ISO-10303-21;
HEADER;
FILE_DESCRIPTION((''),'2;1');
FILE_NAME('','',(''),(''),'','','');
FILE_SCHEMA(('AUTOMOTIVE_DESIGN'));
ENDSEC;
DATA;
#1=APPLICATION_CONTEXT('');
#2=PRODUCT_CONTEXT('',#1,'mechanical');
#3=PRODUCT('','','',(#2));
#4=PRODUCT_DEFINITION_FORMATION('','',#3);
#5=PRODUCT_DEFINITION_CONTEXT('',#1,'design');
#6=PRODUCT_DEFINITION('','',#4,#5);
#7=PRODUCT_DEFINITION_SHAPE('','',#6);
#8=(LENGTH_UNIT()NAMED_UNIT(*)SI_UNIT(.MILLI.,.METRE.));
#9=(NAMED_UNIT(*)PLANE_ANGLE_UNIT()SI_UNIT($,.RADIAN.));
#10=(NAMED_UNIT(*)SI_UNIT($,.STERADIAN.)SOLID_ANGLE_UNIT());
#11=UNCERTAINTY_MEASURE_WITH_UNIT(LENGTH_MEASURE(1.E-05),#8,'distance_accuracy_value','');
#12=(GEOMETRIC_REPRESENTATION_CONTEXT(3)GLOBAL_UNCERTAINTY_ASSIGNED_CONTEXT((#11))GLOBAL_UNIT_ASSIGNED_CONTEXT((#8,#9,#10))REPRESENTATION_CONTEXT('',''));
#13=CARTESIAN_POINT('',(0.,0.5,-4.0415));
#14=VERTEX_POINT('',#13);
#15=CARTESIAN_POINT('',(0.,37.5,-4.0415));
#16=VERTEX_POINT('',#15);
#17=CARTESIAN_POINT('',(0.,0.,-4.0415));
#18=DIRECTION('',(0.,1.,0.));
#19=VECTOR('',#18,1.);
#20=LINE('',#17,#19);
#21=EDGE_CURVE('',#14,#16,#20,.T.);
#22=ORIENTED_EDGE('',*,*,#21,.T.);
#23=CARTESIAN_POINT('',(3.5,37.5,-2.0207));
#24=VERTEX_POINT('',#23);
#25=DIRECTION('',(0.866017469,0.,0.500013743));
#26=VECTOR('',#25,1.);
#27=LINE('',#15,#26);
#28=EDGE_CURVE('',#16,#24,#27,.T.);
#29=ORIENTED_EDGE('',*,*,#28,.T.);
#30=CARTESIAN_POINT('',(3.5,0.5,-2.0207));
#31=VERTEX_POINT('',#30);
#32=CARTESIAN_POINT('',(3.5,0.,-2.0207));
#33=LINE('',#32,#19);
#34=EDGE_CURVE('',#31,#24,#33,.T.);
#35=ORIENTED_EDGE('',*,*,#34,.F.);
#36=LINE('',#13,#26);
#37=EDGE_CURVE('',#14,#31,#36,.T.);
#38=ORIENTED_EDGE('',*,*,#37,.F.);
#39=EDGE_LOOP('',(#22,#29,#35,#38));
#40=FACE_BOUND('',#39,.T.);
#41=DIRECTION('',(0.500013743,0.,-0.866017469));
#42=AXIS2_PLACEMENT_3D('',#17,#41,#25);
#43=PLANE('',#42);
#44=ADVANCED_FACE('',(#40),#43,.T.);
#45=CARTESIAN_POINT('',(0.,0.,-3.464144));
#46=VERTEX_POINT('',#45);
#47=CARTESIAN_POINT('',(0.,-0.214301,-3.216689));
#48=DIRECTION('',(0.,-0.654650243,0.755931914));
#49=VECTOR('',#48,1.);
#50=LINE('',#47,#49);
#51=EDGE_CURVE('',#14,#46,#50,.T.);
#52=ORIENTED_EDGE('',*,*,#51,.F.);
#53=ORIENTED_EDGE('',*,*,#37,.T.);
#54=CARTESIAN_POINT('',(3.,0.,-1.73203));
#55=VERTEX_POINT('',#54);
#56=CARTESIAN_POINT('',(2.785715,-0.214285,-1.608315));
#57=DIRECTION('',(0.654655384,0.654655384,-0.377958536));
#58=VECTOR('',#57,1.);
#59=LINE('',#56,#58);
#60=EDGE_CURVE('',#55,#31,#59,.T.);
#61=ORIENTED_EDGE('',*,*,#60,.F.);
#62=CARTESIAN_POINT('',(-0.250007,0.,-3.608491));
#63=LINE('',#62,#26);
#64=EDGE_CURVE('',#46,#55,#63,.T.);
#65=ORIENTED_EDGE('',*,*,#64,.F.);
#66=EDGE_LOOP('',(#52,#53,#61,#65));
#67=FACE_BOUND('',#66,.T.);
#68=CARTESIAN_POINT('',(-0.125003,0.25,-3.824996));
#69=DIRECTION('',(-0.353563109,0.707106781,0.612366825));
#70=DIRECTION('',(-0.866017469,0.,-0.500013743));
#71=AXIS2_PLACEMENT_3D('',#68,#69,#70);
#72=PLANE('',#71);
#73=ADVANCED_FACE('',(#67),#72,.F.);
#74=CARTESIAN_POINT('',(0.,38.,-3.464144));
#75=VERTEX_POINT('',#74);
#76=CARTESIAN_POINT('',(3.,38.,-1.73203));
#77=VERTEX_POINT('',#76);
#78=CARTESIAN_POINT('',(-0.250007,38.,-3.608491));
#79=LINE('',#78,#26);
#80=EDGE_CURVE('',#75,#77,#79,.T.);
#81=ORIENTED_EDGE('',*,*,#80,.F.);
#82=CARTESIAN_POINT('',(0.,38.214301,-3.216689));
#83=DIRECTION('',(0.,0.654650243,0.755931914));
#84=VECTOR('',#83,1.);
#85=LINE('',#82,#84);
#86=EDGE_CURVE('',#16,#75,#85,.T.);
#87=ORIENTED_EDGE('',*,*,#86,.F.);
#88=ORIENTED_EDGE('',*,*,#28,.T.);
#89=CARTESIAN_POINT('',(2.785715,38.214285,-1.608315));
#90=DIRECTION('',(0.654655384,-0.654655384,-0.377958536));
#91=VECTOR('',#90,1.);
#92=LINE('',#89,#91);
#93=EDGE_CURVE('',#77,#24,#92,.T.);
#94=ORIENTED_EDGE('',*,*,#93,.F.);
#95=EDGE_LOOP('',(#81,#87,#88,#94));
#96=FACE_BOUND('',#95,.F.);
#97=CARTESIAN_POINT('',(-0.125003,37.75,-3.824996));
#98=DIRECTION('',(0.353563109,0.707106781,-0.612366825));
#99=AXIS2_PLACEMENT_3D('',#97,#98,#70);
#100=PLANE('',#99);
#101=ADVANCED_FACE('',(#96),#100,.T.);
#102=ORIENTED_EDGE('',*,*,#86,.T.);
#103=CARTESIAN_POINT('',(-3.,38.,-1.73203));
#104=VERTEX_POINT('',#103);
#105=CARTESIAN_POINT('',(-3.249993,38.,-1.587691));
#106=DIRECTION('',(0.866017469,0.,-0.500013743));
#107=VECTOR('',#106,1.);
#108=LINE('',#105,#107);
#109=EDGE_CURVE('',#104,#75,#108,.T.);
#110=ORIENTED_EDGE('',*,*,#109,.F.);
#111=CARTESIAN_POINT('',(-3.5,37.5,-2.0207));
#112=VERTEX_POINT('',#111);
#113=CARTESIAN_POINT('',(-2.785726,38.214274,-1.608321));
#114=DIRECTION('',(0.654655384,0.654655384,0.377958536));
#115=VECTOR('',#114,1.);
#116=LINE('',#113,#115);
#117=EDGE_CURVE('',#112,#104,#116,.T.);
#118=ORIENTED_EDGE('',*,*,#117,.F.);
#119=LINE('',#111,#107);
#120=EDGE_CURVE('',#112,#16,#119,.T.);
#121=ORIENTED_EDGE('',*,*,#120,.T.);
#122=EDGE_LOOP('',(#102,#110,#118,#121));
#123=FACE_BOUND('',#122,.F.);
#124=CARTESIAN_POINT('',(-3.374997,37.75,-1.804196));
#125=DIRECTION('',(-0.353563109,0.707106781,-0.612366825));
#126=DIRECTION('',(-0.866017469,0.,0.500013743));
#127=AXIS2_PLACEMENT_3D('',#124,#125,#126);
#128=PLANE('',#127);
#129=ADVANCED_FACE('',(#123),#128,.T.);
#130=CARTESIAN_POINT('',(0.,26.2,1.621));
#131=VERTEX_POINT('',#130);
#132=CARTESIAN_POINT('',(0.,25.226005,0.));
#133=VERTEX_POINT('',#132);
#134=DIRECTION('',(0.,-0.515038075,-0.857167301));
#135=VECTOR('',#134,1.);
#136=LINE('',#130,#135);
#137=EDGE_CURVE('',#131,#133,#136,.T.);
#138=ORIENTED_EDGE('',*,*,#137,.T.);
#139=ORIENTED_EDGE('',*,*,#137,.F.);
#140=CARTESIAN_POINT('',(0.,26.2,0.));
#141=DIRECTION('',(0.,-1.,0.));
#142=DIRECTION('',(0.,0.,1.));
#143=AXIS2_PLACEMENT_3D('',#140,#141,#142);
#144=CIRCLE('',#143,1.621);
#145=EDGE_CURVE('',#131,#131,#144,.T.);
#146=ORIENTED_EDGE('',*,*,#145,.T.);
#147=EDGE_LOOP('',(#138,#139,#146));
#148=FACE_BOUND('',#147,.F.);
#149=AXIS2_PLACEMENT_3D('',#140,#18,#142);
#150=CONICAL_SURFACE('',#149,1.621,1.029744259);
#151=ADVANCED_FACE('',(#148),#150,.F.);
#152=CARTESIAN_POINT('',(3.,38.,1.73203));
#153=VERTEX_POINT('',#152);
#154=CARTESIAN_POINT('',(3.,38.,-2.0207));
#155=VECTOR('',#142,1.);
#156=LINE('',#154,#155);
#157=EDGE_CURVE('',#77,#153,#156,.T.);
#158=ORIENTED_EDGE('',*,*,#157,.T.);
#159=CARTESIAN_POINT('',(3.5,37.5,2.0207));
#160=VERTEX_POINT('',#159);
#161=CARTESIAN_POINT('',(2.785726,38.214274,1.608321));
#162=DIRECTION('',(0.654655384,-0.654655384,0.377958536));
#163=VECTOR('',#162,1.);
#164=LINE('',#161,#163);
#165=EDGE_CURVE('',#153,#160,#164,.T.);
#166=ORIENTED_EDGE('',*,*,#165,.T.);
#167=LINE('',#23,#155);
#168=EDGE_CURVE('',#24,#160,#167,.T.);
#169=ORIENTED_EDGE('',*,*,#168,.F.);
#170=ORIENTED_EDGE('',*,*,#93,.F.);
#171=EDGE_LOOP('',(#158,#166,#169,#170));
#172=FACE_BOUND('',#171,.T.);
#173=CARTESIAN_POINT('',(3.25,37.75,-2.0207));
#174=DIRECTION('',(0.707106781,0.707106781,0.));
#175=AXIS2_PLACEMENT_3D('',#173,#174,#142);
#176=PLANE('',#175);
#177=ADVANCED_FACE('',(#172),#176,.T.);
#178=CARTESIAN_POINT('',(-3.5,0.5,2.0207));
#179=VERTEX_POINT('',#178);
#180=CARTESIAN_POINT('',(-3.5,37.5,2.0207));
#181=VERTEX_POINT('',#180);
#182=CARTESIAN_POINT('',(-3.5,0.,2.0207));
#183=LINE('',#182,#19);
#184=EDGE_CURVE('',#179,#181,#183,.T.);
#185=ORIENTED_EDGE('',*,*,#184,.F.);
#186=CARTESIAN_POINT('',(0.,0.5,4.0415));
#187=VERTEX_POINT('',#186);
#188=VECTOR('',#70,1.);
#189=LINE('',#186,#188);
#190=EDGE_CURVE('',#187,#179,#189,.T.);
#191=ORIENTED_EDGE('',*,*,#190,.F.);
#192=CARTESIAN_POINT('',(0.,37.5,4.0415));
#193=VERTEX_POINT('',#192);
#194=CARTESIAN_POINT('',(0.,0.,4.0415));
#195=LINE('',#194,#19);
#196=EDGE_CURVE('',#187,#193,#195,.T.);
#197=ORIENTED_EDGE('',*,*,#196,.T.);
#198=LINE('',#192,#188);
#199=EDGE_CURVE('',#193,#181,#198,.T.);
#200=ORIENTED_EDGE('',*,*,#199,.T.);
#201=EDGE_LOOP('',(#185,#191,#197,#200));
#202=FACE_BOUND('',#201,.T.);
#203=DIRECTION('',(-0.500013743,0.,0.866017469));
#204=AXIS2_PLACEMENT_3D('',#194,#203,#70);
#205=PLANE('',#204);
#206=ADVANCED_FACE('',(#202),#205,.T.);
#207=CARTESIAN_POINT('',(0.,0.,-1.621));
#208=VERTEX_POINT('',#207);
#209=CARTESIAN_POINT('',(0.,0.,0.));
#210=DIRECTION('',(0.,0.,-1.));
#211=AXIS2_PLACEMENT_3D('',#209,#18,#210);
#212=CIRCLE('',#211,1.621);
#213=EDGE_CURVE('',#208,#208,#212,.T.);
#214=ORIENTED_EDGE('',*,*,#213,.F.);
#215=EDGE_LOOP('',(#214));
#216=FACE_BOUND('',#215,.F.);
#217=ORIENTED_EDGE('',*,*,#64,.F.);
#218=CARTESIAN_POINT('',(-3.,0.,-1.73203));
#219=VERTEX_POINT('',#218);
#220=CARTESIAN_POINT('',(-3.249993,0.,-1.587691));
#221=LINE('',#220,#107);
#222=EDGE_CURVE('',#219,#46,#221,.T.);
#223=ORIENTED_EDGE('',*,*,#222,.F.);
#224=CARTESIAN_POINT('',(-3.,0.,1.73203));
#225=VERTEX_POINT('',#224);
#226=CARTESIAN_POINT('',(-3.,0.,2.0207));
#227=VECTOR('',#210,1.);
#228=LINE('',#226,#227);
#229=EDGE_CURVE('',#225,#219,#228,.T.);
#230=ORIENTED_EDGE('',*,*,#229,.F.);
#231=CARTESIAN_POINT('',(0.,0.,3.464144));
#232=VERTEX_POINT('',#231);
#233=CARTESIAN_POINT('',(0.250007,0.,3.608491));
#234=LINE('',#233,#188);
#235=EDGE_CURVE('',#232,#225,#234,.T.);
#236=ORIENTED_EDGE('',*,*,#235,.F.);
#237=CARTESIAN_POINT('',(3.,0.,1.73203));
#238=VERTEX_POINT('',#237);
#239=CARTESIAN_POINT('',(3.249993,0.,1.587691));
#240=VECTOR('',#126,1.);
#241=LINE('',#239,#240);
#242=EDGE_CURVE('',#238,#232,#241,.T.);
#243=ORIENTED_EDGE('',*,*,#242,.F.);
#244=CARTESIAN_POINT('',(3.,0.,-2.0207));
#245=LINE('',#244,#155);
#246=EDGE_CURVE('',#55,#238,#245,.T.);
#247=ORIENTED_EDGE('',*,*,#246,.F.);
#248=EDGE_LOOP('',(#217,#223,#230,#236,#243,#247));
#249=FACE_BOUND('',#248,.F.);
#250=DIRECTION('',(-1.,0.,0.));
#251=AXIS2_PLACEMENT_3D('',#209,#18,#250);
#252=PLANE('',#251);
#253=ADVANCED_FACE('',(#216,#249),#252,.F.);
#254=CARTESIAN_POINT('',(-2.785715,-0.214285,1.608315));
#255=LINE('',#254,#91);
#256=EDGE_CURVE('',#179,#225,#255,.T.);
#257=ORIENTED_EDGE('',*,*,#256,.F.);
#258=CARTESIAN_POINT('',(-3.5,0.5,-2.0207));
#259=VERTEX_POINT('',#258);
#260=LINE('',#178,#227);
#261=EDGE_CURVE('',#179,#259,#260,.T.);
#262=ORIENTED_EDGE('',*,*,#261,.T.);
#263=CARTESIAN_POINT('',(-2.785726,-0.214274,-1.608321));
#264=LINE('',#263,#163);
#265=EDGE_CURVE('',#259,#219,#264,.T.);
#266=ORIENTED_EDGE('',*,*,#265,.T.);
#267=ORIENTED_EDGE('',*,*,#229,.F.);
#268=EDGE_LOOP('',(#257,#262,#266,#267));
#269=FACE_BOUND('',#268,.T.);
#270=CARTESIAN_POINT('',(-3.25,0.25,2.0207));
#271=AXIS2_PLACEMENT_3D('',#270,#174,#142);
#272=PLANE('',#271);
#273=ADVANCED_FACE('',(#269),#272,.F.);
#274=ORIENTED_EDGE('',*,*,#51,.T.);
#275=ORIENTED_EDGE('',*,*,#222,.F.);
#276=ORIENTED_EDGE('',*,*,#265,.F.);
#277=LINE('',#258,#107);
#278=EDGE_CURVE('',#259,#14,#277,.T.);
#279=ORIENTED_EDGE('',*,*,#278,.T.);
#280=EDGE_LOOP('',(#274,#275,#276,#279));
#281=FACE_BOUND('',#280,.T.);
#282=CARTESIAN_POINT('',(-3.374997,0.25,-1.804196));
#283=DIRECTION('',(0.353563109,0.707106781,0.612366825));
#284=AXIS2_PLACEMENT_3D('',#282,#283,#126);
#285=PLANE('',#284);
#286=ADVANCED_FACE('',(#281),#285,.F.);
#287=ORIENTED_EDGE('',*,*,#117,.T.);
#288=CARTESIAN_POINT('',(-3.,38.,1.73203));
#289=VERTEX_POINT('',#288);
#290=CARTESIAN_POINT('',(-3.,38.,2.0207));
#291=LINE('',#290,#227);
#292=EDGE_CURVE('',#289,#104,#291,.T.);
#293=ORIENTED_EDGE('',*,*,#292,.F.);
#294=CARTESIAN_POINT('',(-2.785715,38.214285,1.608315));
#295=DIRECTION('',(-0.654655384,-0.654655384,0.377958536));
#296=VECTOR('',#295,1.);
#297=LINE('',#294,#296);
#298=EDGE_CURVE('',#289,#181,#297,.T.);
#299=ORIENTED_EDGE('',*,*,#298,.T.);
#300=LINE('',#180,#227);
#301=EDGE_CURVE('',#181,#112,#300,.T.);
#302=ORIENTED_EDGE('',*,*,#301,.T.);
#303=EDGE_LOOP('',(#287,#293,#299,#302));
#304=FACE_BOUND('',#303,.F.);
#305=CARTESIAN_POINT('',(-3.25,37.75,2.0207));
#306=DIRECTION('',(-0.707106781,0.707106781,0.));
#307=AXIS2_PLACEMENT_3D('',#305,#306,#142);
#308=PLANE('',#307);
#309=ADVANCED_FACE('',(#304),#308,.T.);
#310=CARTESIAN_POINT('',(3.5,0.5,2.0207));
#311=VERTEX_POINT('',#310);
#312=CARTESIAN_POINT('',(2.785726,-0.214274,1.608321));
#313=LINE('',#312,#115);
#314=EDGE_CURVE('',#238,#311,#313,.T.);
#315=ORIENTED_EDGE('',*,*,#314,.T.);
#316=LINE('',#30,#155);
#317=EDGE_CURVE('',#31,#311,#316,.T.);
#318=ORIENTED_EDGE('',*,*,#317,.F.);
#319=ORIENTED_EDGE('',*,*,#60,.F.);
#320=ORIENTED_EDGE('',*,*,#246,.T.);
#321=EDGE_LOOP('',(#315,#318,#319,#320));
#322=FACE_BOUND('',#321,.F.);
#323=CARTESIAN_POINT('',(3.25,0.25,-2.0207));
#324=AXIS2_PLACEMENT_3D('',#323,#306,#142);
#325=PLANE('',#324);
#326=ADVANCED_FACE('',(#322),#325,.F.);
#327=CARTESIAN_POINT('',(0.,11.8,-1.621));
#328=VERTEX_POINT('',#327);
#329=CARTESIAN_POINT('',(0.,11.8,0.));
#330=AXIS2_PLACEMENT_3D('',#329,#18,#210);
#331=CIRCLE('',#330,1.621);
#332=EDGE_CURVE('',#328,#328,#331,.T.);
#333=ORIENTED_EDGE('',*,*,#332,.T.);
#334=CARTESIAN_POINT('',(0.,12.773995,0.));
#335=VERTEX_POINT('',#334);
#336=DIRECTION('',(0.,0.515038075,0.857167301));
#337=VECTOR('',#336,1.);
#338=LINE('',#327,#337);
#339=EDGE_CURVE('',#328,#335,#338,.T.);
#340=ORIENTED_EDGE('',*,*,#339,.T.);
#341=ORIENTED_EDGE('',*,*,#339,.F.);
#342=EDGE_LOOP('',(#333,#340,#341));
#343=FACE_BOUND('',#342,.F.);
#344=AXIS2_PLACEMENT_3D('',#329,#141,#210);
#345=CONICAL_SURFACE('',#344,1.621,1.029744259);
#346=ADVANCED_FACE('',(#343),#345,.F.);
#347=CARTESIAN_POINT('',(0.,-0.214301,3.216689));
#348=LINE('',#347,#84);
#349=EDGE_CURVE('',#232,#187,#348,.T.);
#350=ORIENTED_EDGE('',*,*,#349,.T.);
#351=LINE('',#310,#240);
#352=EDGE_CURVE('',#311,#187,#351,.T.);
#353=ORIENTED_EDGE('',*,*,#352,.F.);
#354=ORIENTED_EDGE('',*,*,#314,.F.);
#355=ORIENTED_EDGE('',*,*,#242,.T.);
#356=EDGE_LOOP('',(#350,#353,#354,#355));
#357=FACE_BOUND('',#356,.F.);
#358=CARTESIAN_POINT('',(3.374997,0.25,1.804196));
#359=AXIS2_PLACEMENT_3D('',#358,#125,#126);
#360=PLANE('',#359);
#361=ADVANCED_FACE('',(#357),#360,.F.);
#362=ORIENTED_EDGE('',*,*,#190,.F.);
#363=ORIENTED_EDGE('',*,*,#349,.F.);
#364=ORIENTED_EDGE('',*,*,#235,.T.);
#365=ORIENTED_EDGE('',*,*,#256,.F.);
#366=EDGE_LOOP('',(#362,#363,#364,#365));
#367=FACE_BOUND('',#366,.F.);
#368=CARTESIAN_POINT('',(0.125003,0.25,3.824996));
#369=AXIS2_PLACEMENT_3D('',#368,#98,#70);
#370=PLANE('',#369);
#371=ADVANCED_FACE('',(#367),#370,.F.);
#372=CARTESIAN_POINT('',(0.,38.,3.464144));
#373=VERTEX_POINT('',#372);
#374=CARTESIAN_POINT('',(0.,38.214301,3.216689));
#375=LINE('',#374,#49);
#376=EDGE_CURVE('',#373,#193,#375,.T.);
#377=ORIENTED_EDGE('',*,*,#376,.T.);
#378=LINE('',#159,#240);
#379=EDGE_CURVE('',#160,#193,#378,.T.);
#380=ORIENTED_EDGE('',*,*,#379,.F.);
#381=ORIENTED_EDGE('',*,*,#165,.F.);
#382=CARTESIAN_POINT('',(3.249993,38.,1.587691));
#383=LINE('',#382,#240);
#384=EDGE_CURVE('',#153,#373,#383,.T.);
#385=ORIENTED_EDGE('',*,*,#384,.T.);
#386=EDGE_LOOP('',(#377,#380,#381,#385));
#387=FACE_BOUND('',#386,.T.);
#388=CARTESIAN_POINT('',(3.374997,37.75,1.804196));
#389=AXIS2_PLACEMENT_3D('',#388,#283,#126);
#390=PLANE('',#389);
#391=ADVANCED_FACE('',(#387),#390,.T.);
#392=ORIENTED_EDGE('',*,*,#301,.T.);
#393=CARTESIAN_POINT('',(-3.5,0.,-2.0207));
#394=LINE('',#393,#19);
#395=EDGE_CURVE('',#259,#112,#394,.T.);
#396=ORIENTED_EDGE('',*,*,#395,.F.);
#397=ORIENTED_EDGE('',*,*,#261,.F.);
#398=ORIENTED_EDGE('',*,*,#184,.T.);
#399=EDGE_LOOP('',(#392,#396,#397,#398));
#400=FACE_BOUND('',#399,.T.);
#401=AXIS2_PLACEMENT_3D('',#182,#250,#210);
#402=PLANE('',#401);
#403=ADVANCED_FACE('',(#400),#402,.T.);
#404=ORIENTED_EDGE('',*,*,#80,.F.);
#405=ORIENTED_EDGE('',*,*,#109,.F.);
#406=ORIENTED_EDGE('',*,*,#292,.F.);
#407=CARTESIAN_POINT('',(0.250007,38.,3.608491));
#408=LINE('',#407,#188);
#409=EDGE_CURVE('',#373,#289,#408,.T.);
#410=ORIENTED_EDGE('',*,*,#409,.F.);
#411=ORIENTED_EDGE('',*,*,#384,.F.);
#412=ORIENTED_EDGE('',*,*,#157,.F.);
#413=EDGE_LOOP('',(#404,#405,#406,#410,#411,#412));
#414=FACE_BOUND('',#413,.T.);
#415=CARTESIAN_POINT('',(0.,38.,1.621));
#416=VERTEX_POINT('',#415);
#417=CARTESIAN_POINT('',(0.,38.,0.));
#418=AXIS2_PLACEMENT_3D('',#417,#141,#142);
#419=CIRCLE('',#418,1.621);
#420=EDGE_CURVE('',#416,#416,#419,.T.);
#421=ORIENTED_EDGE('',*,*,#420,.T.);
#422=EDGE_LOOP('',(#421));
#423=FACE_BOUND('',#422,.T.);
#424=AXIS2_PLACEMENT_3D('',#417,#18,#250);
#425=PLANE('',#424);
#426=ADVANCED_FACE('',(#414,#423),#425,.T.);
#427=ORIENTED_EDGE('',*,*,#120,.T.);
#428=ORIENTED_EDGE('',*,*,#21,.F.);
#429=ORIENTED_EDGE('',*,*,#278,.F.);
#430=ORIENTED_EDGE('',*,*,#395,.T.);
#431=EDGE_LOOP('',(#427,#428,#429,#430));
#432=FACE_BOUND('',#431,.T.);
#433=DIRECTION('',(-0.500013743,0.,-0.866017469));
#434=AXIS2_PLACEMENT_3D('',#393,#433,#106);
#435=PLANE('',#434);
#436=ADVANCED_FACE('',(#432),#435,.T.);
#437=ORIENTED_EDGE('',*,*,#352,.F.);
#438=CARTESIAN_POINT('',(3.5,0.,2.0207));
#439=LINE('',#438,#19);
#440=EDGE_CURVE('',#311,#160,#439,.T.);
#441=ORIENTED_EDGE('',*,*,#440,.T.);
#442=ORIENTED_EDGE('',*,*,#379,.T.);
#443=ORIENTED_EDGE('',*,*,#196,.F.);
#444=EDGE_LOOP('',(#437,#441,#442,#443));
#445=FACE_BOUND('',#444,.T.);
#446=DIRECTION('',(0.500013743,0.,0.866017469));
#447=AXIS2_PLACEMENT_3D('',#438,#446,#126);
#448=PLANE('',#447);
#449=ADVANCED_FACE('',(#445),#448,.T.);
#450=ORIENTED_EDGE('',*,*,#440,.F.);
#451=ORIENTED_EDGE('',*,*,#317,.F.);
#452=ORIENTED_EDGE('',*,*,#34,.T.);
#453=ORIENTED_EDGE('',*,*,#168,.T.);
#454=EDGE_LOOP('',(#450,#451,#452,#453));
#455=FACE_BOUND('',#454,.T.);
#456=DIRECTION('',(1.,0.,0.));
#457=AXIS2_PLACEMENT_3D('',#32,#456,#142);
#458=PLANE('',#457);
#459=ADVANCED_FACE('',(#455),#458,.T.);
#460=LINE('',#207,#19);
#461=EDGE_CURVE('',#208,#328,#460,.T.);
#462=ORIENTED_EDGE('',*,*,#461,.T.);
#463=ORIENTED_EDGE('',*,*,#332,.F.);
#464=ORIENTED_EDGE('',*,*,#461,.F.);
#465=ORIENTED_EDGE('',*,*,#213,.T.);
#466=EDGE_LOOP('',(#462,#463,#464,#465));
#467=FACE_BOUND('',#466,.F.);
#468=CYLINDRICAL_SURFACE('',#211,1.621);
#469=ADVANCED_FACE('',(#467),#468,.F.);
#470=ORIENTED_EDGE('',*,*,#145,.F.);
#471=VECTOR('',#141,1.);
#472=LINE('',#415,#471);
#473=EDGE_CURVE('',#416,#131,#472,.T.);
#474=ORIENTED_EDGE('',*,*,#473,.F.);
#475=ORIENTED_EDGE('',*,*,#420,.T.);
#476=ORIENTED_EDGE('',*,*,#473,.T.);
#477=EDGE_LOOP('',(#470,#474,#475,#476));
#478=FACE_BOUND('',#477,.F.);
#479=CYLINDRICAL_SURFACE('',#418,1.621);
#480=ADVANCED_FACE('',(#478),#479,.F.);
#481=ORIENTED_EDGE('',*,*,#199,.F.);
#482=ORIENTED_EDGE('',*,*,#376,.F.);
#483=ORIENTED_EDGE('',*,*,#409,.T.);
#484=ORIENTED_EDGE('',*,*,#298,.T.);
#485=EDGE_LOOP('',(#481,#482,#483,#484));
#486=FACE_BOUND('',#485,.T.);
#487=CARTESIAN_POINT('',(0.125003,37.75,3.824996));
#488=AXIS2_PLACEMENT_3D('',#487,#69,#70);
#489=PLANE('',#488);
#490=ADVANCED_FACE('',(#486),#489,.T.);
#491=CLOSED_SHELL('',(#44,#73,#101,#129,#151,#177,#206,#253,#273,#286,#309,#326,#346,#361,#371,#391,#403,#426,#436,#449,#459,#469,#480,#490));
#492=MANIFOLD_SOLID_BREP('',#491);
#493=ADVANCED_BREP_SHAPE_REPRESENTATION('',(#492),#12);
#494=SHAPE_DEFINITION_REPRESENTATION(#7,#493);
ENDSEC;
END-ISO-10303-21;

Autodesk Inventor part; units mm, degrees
ref_plane "YZ Plane" through (0, 0, 0) normal (1, 0, 0) x (0, 1, 0)
ref_plane "XZ Plane" through (0, 0, 0) normal (0, 1, 0) x (-1, 0, 0)
ref_plane "XY Plane" through (0, 0, 0) normal (0, 0, 1) x (1, 0, 0)
sketch "Skizze1" plane through (0, 0, 0) normal (0, 1, 0) x (-1, 0, 0)
  line L0 (3.5, -2.0207) -> (0, -4.0415)
  line L1 (0, -4.0415) -> (-3.5, -2.0207)
  line L2 (-3.5, -2.0207) -> (-3.5, 2.0207)
  line L3 (-3.5, 2.0207) -> (0, 4.0415)
  line L4 (0, 4.0415) -> (3.5, 2.0207)
  line L5 (3.5, 2.0207) -> (3.5, -2.0207)
  point P0 (0, 0)
  point P1 (0, 0)
  dimension "d0" = 7
extrude "Extrusion1" add sketch "Skizze1" along normal blind 38
sketch "Skizze2" plane through (0, 38, 0) normal (0, 1, 0) x (1, 0, 0)
  point P0 (0, 0)
  point P1 (0, 0)
hole "Bohrung1" at (0, 38, 0) direction (0, -1, 0) diameter 3.242 depth 11.8 tip angle 118 thread size "M4x0.7" class "6H" standard "ISO Metric profile"
sketch "Skizze3" plane through (0, 0, 0) normal (0, -1, 0) x (1, 0, 0)
  point P0 (0, 0)
  point P1 (0, 0)
hole "Bohrung2" at (0, 0, 0) direction (0, 1, 0) diameter 3.242 depth 11.8 tip angle 118 thread size "M4x0.7" class "6H" standard "ISO Metric profile"
chamfer "Fasen1" distance 0.5 angle 45 12 edges at (-1.75, 38, 3.0311) (1.75, 38, 3.0311) (3.5, 38, 0) (1.75, 38, -3.0311) (-1.75, 38, -3.0311) (-3.5, 38, 0) (-3.5, 0, 0) (-1.75, 0, 3.0311) (1.75, 0, 3.0311) (3.5, 0, 0) (1.75, 0, -3.0311) (-1.75, 0, -3.0311)
properties part number "Abstandsbolzen 38mm" material "Aluminium 6061"
